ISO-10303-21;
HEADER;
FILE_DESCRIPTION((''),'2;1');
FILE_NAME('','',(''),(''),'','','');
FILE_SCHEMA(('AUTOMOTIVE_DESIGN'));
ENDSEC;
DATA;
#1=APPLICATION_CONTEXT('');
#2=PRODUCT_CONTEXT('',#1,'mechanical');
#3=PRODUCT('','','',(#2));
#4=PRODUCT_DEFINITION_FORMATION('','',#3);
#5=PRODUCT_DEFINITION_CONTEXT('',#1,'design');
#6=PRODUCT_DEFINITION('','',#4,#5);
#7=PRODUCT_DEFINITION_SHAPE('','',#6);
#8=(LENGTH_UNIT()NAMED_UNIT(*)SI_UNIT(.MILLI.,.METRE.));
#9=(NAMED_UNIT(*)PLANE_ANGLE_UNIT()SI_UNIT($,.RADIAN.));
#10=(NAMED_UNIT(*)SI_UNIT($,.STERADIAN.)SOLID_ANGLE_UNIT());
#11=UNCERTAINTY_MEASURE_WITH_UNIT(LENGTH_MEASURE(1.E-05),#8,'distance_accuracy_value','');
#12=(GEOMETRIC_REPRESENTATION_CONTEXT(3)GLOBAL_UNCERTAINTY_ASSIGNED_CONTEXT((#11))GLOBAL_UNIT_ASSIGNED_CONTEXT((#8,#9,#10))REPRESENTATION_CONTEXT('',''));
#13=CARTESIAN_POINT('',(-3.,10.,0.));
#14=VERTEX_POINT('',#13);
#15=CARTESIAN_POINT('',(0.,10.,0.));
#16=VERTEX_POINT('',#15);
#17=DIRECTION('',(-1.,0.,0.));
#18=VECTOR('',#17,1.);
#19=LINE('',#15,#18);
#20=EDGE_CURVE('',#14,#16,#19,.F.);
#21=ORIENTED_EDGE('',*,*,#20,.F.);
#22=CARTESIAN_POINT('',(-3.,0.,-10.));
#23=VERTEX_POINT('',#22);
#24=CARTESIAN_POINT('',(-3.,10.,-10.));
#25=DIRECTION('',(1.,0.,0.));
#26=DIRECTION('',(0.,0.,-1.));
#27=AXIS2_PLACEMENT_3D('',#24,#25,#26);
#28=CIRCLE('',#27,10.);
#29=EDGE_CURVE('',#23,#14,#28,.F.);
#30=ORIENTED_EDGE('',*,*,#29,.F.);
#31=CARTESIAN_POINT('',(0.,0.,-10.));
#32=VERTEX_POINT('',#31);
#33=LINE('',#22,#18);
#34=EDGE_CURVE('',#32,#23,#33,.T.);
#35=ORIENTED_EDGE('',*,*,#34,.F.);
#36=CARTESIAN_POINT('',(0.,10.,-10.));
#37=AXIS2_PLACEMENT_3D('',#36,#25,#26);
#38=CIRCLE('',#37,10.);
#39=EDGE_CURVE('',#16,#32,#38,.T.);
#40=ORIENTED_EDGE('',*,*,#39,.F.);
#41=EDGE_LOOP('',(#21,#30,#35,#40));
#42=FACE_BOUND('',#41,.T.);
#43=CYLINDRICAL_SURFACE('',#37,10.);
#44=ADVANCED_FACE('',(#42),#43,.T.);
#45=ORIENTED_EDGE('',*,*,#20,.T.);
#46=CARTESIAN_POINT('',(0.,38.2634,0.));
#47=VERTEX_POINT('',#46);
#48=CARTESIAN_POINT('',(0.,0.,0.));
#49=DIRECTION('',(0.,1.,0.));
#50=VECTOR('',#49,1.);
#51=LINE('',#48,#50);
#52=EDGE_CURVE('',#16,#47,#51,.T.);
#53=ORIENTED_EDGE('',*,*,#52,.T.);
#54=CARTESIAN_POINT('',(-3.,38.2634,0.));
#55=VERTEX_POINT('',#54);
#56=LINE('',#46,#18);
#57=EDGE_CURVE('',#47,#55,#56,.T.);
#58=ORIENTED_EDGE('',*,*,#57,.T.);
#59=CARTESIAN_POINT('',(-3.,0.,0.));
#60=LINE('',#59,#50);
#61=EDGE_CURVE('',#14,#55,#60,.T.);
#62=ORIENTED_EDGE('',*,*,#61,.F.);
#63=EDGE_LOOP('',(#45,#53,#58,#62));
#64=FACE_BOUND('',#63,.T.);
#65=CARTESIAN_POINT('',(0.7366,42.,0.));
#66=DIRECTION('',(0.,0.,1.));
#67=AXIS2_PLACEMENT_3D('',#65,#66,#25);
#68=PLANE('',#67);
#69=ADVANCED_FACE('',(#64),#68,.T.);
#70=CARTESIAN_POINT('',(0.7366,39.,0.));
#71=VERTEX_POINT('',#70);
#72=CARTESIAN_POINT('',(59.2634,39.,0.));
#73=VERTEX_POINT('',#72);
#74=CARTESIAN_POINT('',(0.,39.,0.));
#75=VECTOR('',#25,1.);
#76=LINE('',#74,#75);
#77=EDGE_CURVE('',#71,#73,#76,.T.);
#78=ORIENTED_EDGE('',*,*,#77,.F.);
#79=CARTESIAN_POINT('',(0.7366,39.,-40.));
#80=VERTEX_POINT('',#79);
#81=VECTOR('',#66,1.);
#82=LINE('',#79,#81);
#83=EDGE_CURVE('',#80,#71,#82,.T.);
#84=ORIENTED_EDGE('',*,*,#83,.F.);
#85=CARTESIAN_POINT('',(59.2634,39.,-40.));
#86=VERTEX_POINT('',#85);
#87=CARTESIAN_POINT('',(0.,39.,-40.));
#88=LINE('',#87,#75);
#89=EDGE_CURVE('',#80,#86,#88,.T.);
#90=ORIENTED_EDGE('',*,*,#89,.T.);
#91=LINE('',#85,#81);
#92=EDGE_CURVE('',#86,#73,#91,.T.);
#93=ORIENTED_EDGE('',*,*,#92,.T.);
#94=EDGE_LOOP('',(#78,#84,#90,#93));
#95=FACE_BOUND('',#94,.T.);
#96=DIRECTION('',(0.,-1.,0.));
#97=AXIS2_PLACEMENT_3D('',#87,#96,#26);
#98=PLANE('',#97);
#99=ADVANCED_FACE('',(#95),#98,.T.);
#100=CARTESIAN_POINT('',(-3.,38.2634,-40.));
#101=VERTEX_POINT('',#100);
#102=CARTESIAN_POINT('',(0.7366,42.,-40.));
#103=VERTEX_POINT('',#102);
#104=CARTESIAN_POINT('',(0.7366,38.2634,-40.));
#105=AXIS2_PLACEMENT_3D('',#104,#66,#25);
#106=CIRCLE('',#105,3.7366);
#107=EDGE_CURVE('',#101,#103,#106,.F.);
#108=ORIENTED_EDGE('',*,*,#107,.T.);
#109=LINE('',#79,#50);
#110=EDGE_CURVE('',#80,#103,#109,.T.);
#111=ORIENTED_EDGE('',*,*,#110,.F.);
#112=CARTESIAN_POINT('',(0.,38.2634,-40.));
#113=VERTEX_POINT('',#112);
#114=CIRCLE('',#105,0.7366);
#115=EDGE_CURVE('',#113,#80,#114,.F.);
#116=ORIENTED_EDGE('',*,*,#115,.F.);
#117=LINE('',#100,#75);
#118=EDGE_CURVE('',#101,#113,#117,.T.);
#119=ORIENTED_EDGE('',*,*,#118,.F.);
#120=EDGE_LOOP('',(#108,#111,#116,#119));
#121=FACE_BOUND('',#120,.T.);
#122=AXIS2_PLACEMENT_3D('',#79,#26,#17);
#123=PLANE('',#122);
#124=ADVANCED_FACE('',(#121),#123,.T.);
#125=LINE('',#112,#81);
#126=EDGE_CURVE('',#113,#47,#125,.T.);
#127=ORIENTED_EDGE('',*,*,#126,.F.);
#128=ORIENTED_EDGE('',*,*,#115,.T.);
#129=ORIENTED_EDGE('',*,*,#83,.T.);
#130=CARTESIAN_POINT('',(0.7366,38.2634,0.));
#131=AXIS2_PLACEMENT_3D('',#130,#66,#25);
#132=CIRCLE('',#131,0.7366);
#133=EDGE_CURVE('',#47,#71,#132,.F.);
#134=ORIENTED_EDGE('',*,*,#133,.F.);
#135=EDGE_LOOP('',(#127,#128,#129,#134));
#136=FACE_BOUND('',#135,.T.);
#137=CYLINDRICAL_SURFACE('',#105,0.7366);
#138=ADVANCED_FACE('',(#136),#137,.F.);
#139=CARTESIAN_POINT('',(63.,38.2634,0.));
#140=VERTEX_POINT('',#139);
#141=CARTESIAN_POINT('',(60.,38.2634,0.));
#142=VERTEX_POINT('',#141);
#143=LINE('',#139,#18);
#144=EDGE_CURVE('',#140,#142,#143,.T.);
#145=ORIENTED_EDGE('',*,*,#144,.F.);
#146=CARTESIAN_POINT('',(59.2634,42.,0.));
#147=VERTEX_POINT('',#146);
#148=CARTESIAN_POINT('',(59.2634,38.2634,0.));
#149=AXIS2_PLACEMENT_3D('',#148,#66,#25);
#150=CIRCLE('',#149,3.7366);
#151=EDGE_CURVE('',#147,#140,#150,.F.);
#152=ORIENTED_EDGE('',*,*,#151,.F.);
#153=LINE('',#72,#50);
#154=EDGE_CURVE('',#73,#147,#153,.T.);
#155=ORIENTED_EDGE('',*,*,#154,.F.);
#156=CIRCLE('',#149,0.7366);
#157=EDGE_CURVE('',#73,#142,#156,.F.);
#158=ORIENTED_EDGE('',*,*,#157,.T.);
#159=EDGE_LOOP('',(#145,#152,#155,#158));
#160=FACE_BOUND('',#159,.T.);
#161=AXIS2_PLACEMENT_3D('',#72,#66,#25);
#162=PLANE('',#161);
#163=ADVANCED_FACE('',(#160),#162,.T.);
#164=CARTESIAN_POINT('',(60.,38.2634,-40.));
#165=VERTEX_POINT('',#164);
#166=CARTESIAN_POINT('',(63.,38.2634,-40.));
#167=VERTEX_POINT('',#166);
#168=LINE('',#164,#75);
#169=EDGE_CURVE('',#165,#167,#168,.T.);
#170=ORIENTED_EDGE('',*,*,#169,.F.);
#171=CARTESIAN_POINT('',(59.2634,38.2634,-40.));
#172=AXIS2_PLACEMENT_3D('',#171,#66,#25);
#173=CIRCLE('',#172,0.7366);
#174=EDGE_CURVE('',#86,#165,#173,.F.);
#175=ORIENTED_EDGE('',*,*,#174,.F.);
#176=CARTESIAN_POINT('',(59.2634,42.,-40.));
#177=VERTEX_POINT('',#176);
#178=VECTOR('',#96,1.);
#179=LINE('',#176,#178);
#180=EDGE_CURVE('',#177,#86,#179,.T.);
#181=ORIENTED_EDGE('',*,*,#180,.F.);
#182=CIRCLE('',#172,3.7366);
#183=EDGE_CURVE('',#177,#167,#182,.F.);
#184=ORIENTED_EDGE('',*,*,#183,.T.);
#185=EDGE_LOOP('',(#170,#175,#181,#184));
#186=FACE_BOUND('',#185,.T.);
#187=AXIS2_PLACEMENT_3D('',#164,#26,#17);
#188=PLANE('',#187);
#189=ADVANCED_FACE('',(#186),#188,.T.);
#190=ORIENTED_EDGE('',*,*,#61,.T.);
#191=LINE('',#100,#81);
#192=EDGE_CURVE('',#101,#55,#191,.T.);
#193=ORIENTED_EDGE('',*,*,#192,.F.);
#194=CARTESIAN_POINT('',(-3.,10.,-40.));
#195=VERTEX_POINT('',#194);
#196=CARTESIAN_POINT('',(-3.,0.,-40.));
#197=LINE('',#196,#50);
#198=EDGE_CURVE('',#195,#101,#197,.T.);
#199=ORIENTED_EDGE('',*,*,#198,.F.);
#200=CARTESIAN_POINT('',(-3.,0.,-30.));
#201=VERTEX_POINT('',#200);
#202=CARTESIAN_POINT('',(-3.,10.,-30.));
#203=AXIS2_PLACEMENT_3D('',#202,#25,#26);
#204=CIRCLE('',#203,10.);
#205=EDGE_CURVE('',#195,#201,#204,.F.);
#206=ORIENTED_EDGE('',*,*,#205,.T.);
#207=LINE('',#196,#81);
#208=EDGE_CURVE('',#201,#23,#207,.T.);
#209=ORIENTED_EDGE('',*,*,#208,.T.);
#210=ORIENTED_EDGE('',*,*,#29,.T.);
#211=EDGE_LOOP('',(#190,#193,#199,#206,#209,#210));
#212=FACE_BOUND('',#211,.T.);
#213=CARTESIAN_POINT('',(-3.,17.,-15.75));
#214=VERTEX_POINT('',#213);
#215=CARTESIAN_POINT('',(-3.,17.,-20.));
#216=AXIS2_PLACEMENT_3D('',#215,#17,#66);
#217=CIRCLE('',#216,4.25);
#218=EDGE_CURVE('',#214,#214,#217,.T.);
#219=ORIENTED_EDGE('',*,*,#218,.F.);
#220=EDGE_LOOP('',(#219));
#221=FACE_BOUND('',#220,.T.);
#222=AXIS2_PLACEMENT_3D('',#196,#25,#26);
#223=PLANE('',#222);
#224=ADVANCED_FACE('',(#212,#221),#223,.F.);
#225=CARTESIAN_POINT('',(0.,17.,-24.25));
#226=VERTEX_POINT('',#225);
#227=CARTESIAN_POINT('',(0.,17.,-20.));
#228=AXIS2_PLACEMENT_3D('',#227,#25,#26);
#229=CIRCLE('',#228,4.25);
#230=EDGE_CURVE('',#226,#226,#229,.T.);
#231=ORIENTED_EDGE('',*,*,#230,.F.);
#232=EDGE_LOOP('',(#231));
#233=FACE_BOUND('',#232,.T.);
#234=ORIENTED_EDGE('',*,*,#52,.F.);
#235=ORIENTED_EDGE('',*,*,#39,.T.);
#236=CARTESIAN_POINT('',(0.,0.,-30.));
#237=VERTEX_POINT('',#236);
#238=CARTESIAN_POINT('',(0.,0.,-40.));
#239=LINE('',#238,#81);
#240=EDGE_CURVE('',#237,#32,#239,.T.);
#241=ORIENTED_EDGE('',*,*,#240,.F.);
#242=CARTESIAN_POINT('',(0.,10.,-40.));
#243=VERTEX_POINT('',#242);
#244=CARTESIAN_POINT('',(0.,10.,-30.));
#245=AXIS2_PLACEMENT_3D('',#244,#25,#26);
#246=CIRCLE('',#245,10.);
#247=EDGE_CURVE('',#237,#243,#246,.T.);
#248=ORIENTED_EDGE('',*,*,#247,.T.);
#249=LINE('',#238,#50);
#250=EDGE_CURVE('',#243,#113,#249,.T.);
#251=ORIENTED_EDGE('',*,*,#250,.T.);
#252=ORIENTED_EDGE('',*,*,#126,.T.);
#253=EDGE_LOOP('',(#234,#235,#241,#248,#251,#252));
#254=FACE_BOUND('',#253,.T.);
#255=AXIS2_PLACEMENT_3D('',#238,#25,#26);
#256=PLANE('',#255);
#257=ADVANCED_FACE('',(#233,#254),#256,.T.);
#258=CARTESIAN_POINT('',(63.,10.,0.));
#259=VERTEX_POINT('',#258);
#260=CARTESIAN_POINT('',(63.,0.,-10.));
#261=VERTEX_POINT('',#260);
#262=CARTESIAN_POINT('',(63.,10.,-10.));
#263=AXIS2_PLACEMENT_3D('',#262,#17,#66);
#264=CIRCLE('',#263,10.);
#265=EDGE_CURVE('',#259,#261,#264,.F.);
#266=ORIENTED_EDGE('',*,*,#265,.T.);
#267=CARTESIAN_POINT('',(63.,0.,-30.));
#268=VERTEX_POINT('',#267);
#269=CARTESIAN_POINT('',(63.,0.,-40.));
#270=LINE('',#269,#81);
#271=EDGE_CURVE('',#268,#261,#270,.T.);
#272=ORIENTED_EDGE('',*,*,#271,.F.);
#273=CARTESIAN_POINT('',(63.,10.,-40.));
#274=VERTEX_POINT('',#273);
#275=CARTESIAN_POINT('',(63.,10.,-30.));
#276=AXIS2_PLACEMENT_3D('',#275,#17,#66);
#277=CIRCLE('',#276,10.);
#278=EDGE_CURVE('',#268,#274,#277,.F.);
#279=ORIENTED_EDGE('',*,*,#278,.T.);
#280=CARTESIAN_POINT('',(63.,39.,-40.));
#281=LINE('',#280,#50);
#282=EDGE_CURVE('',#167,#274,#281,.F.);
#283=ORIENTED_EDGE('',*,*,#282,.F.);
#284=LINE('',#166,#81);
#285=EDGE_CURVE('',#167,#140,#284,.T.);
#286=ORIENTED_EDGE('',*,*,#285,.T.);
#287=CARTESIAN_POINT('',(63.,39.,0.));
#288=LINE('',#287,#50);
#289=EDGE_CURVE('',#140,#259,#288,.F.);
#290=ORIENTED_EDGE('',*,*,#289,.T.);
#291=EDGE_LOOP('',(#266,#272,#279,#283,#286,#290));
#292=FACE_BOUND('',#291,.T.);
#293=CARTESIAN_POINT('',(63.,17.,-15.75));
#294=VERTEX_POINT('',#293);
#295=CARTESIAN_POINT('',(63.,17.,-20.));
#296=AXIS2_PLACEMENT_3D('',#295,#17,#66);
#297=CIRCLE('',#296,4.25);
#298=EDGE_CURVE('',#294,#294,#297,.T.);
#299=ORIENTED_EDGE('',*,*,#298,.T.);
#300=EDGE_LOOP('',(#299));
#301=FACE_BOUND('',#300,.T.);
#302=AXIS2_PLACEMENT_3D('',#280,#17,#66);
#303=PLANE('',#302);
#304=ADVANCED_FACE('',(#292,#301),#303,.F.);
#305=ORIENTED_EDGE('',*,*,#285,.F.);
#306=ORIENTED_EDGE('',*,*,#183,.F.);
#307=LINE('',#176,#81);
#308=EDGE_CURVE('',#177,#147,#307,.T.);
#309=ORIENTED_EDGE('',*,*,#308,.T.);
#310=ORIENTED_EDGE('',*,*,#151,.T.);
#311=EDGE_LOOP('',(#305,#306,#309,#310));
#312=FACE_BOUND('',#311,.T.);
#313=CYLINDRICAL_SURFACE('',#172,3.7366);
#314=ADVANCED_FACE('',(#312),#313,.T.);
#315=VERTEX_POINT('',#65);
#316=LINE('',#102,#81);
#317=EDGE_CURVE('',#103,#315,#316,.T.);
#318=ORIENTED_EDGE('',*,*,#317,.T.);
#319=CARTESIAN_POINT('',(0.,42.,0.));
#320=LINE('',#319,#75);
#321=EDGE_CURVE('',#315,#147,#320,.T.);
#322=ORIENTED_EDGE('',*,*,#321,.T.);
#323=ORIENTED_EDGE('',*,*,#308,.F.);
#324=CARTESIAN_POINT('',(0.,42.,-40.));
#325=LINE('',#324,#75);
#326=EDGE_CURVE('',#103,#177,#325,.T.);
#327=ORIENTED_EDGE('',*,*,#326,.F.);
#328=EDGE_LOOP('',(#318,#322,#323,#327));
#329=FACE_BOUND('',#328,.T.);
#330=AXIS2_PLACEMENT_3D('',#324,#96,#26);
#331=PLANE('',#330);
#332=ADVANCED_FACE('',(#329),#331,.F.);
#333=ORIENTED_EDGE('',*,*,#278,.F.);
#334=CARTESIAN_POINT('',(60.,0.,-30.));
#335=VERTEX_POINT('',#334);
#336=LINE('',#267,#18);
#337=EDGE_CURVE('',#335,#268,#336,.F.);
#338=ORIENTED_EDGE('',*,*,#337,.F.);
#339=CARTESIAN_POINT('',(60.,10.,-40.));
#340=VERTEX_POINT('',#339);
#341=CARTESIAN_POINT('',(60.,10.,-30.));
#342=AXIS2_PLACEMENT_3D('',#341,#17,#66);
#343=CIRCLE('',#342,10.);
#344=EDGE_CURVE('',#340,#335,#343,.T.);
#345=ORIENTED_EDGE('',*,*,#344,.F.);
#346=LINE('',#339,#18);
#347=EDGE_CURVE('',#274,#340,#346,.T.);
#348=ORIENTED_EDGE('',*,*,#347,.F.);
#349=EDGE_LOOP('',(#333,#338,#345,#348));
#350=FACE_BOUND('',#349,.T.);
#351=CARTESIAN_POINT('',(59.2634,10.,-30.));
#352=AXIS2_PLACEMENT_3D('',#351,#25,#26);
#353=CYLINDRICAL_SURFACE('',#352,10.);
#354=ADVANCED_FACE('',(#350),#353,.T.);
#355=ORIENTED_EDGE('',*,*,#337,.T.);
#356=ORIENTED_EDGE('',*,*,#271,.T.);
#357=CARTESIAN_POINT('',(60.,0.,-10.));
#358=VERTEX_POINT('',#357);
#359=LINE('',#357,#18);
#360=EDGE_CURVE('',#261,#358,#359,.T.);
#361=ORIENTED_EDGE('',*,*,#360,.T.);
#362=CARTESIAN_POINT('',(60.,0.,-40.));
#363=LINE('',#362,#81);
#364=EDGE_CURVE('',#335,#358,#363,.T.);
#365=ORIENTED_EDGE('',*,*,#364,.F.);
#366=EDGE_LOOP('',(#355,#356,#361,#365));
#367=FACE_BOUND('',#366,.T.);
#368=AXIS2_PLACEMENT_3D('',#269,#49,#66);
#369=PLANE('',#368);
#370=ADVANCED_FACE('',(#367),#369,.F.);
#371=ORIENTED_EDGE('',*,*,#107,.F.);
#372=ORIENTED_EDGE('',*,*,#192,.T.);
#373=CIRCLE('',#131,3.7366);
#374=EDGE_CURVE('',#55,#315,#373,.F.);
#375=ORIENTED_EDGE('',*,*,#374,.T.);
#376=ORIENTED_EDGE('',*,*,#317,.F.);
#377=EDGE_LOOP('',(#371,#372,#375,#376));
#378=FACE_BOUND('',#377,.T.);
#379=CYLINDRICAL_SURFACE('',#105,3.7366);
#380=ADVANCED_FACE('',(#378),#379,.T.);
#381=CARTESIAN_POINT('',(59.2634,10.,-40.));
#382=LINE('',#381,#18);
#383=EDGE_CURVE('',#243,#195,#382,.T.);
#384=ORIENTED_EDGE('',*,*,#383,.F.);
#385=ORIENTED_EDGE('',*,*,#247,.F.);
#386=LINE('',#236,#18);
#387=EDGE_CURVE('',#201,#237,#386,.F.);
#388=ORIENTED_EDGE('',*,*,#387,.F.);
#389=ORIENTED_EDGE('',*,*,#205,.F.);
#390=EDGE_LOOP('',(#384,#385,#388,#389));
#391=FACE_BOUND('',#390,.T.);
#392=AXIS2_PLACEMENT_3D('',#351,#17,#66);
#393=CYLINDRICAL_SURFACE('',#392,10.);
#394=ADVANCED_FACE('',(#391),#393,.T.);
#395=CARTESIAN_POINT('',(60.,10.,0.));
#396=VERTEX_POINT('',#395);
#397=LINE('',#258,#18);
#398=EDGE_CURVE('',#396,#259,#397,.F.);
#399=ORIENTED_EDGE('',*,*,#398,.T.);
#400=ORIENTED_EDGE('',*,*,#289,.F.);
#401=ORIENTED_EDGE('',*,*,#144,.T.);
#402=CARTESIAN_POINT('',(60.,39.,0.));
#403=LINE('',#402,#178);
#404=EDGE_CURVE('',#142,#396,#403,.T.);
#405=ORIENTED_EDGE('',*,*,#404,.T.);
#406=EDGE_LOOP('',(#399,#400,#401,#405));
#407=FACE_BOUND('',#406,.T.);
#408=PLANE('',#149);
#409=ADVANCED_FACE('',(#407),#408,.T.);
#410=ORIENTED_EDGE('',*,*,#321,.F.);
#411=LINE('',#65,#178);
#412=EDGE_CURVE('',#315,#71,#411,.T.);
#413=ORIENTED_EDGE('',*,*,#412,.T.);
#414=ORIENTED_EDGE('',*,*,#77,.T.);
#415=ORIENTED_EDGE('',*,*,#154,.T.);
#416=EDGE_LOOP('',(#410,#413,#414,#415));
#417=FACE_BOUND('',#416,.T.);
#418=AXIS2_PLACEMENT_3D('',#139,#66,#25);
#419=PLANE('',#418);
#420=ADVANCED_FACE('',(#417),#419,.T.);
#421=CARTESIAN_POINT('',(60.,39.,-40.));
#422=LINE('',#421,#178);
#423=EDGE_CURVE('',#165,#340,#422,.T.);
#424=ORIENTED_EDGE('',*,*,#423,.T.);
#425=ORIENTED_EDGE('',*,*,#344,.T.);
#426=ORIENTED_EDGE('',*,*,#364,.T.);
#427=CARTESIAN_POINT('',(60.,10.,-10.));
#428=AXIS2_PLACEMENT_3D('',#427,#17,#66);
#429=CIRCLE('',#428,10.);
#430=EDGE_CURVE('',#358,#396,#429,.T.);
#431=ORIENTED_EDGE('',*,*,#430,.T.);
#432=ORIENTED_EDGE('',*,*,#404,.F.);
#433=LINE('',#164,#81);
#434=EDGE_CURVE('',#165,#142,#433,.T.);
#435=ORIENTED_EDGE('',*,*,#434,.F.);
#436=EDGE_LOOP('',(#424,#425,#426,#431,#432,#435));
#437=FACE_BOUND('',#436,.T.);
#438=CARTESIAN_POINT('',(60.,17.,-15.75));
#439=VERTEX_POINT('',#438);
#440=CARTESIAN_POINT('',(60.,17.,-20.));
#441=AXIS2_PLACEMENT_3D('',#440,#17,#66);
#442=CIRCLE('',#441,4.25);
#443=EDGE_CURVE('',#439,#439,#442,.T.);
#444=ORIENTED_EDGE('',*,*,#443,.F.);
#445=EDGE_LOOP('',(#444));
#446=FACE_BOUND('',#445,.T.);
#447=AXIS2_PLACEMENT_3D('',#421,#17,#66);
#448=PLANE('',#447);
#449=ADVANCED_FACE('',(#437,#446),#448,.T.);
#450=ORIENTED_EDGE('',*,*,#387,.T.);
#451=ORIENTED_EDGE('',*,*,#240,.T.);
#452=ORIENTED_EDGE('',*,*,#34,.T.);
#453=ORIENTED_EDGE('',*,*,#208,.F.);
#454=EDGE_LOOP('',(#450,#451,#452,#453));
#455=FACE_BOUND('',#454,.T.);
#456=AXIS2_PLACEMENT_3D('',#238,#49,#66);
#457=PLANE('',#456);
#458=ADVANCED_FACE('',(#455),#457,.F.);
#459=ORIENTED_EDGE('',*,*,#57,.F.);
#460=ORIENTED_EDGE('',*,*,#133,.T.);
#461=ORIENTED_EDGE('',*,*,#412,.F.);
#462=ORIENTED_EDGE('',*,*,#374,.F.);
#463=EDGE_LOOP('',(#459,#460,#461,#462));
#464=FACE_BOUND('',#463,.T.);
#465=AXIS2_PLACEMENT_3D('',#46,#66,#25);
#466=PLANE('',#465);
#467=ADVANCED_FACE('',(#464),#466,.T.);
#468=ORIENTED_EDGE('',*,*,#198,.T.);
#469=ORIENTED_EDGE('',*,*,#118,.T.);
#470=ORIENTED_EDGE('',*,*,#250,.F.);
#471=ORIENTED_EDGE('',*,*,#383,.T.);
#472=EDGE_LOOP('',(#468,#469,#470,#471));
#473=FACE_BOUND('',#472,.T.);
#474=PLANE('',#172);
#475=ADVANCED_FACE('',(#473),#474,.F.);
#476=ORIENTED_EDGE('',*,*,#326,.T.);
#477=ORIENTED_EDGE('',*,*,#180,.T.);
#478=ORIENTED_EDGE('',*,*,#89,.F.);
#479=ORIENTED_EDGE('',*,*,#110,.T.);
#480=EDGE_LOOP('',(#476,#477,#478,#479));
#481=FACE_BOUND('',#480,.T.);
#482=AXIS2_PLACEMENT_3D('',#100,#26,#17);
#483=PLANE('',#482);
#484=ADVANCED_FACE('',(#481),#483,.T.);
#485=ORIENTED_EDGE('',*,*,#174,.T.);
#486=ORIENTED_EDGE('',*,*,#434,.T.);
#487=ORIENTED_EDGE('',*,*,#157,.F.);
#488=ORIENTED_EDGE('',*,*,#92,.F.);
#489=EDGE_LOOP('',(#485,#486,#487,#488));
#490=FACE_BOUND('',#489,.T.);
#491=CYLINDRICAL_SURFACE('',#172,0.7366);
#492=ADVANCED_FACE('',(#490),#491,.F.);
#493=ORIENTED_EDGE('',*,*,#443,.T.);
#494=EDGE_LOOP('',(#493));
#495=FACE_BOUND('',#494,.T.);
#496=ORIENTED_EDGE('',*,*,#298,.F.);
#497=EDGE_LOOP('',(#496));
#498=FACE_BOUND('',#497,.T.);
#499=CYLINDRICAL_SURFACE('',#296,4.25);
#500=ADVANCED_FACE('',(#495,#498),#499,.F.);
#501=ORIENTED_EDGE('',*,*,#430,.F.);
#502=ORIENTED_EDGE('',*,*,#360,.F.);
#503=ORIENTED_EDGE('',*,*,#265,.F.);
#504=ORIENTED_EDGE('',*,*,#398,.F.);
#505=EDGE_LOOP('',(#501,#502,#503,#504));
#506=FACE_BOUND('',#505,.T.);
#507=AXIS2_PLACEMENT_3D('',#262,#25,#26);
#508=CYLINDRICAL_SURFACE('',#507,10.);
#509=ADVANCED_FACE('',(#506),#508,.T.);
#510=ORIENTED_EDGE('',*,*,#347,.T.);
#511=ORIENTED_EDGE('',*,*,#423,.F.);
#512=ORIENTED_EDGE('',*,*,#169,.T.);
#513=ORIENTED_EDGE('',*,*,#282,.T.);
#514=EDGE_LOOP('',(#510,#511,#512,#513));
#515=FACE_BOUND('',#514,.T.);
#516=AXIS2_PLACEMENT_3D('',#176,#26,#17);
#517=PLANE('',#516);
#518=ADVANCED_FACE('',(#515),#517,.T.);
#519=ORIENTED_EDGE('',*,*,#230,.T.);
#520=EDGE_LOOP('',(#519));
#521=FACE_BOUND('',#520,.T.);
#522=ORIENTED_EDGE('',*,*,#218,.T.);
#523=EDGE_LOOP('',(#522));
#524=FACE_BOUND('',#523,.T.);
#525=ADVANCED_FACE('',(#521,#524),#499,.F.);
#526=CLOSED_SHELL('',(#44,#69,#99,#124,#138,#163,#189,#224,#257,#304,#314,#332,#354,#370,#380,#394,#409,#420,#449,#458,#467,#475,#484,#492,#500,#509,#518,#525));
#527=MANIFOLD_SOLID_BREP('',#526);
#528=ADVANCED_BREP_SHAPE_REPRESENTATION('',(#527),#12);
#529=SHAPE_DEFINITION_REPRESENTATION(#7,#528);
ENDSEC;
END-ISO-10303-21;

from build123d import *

# Parameters (mm, degrees)
BASE_FLANGE1_DEPTH = 40
FILLET1_R          = 10
SKETCH6_R          = 4.25
CUT_EXTRUDE1_DEPTH = 88.863530546


# Sheet-metal steps are written as plain solids
with BuildPart() as part:
    # Sketch1 → Base-Flange1 (new body)
    with BuildSketch(Plane.XY):
        with BuildLine():
            Line((0, 0), (0, 38.2634))
            ThreePointArc((0, 38.2634), (0.215745145, 38.784254855), (0.7366, 39))
            Line((0.7366, 39), (59.2634, 39))
            ThreePointArc((59.2634, 39), (59.784254855, 38.784254855), (60, 38.2634))
            Line((60, 38.2634), (60, 0))
            Line((60, 0), (63, 0))
            Line((63, 0), (63, 38.2634))
            ThreePointArc((63, 38.2634), (61.905575199, 40.905575199), (59.2634, 42))
            Line((59.2634, 42), (0.7366, 42))
            ThreePointArc((0.7366, 42), (-1.905575199, 40.905575199), (-3, 38.2634))
            Line((-3, 38.2634), (-3, 0))
            Line((-3, 0), (0, 0))
        make_face()
    extrude(amount=-BASE_FLANGE1_DEPTH)

    # Fillet1
    fillet1_edges = [part.edges().sort_by_distance(p)[0] for p in [
        (-1.5, 0, 0),
        (61.5, 0, 0),
        (-1.5, 0, -40),
        (61.5, 0, -40),
    ]]
    fillet(fillet1_edges, radius=FILLET1_R)

    # Sketch6 → Cut-Extrude1 (cut, through all)
    with BuildSketch(Plane.ZY.offset(3)):
        with Locations((-20, 17)):
            Circle(SKETCH6_R)
    extrude(amount=-CUT_EXTRUDE1_DEPTH, mode=Mode.SUBTRACT)


solid = part.part
